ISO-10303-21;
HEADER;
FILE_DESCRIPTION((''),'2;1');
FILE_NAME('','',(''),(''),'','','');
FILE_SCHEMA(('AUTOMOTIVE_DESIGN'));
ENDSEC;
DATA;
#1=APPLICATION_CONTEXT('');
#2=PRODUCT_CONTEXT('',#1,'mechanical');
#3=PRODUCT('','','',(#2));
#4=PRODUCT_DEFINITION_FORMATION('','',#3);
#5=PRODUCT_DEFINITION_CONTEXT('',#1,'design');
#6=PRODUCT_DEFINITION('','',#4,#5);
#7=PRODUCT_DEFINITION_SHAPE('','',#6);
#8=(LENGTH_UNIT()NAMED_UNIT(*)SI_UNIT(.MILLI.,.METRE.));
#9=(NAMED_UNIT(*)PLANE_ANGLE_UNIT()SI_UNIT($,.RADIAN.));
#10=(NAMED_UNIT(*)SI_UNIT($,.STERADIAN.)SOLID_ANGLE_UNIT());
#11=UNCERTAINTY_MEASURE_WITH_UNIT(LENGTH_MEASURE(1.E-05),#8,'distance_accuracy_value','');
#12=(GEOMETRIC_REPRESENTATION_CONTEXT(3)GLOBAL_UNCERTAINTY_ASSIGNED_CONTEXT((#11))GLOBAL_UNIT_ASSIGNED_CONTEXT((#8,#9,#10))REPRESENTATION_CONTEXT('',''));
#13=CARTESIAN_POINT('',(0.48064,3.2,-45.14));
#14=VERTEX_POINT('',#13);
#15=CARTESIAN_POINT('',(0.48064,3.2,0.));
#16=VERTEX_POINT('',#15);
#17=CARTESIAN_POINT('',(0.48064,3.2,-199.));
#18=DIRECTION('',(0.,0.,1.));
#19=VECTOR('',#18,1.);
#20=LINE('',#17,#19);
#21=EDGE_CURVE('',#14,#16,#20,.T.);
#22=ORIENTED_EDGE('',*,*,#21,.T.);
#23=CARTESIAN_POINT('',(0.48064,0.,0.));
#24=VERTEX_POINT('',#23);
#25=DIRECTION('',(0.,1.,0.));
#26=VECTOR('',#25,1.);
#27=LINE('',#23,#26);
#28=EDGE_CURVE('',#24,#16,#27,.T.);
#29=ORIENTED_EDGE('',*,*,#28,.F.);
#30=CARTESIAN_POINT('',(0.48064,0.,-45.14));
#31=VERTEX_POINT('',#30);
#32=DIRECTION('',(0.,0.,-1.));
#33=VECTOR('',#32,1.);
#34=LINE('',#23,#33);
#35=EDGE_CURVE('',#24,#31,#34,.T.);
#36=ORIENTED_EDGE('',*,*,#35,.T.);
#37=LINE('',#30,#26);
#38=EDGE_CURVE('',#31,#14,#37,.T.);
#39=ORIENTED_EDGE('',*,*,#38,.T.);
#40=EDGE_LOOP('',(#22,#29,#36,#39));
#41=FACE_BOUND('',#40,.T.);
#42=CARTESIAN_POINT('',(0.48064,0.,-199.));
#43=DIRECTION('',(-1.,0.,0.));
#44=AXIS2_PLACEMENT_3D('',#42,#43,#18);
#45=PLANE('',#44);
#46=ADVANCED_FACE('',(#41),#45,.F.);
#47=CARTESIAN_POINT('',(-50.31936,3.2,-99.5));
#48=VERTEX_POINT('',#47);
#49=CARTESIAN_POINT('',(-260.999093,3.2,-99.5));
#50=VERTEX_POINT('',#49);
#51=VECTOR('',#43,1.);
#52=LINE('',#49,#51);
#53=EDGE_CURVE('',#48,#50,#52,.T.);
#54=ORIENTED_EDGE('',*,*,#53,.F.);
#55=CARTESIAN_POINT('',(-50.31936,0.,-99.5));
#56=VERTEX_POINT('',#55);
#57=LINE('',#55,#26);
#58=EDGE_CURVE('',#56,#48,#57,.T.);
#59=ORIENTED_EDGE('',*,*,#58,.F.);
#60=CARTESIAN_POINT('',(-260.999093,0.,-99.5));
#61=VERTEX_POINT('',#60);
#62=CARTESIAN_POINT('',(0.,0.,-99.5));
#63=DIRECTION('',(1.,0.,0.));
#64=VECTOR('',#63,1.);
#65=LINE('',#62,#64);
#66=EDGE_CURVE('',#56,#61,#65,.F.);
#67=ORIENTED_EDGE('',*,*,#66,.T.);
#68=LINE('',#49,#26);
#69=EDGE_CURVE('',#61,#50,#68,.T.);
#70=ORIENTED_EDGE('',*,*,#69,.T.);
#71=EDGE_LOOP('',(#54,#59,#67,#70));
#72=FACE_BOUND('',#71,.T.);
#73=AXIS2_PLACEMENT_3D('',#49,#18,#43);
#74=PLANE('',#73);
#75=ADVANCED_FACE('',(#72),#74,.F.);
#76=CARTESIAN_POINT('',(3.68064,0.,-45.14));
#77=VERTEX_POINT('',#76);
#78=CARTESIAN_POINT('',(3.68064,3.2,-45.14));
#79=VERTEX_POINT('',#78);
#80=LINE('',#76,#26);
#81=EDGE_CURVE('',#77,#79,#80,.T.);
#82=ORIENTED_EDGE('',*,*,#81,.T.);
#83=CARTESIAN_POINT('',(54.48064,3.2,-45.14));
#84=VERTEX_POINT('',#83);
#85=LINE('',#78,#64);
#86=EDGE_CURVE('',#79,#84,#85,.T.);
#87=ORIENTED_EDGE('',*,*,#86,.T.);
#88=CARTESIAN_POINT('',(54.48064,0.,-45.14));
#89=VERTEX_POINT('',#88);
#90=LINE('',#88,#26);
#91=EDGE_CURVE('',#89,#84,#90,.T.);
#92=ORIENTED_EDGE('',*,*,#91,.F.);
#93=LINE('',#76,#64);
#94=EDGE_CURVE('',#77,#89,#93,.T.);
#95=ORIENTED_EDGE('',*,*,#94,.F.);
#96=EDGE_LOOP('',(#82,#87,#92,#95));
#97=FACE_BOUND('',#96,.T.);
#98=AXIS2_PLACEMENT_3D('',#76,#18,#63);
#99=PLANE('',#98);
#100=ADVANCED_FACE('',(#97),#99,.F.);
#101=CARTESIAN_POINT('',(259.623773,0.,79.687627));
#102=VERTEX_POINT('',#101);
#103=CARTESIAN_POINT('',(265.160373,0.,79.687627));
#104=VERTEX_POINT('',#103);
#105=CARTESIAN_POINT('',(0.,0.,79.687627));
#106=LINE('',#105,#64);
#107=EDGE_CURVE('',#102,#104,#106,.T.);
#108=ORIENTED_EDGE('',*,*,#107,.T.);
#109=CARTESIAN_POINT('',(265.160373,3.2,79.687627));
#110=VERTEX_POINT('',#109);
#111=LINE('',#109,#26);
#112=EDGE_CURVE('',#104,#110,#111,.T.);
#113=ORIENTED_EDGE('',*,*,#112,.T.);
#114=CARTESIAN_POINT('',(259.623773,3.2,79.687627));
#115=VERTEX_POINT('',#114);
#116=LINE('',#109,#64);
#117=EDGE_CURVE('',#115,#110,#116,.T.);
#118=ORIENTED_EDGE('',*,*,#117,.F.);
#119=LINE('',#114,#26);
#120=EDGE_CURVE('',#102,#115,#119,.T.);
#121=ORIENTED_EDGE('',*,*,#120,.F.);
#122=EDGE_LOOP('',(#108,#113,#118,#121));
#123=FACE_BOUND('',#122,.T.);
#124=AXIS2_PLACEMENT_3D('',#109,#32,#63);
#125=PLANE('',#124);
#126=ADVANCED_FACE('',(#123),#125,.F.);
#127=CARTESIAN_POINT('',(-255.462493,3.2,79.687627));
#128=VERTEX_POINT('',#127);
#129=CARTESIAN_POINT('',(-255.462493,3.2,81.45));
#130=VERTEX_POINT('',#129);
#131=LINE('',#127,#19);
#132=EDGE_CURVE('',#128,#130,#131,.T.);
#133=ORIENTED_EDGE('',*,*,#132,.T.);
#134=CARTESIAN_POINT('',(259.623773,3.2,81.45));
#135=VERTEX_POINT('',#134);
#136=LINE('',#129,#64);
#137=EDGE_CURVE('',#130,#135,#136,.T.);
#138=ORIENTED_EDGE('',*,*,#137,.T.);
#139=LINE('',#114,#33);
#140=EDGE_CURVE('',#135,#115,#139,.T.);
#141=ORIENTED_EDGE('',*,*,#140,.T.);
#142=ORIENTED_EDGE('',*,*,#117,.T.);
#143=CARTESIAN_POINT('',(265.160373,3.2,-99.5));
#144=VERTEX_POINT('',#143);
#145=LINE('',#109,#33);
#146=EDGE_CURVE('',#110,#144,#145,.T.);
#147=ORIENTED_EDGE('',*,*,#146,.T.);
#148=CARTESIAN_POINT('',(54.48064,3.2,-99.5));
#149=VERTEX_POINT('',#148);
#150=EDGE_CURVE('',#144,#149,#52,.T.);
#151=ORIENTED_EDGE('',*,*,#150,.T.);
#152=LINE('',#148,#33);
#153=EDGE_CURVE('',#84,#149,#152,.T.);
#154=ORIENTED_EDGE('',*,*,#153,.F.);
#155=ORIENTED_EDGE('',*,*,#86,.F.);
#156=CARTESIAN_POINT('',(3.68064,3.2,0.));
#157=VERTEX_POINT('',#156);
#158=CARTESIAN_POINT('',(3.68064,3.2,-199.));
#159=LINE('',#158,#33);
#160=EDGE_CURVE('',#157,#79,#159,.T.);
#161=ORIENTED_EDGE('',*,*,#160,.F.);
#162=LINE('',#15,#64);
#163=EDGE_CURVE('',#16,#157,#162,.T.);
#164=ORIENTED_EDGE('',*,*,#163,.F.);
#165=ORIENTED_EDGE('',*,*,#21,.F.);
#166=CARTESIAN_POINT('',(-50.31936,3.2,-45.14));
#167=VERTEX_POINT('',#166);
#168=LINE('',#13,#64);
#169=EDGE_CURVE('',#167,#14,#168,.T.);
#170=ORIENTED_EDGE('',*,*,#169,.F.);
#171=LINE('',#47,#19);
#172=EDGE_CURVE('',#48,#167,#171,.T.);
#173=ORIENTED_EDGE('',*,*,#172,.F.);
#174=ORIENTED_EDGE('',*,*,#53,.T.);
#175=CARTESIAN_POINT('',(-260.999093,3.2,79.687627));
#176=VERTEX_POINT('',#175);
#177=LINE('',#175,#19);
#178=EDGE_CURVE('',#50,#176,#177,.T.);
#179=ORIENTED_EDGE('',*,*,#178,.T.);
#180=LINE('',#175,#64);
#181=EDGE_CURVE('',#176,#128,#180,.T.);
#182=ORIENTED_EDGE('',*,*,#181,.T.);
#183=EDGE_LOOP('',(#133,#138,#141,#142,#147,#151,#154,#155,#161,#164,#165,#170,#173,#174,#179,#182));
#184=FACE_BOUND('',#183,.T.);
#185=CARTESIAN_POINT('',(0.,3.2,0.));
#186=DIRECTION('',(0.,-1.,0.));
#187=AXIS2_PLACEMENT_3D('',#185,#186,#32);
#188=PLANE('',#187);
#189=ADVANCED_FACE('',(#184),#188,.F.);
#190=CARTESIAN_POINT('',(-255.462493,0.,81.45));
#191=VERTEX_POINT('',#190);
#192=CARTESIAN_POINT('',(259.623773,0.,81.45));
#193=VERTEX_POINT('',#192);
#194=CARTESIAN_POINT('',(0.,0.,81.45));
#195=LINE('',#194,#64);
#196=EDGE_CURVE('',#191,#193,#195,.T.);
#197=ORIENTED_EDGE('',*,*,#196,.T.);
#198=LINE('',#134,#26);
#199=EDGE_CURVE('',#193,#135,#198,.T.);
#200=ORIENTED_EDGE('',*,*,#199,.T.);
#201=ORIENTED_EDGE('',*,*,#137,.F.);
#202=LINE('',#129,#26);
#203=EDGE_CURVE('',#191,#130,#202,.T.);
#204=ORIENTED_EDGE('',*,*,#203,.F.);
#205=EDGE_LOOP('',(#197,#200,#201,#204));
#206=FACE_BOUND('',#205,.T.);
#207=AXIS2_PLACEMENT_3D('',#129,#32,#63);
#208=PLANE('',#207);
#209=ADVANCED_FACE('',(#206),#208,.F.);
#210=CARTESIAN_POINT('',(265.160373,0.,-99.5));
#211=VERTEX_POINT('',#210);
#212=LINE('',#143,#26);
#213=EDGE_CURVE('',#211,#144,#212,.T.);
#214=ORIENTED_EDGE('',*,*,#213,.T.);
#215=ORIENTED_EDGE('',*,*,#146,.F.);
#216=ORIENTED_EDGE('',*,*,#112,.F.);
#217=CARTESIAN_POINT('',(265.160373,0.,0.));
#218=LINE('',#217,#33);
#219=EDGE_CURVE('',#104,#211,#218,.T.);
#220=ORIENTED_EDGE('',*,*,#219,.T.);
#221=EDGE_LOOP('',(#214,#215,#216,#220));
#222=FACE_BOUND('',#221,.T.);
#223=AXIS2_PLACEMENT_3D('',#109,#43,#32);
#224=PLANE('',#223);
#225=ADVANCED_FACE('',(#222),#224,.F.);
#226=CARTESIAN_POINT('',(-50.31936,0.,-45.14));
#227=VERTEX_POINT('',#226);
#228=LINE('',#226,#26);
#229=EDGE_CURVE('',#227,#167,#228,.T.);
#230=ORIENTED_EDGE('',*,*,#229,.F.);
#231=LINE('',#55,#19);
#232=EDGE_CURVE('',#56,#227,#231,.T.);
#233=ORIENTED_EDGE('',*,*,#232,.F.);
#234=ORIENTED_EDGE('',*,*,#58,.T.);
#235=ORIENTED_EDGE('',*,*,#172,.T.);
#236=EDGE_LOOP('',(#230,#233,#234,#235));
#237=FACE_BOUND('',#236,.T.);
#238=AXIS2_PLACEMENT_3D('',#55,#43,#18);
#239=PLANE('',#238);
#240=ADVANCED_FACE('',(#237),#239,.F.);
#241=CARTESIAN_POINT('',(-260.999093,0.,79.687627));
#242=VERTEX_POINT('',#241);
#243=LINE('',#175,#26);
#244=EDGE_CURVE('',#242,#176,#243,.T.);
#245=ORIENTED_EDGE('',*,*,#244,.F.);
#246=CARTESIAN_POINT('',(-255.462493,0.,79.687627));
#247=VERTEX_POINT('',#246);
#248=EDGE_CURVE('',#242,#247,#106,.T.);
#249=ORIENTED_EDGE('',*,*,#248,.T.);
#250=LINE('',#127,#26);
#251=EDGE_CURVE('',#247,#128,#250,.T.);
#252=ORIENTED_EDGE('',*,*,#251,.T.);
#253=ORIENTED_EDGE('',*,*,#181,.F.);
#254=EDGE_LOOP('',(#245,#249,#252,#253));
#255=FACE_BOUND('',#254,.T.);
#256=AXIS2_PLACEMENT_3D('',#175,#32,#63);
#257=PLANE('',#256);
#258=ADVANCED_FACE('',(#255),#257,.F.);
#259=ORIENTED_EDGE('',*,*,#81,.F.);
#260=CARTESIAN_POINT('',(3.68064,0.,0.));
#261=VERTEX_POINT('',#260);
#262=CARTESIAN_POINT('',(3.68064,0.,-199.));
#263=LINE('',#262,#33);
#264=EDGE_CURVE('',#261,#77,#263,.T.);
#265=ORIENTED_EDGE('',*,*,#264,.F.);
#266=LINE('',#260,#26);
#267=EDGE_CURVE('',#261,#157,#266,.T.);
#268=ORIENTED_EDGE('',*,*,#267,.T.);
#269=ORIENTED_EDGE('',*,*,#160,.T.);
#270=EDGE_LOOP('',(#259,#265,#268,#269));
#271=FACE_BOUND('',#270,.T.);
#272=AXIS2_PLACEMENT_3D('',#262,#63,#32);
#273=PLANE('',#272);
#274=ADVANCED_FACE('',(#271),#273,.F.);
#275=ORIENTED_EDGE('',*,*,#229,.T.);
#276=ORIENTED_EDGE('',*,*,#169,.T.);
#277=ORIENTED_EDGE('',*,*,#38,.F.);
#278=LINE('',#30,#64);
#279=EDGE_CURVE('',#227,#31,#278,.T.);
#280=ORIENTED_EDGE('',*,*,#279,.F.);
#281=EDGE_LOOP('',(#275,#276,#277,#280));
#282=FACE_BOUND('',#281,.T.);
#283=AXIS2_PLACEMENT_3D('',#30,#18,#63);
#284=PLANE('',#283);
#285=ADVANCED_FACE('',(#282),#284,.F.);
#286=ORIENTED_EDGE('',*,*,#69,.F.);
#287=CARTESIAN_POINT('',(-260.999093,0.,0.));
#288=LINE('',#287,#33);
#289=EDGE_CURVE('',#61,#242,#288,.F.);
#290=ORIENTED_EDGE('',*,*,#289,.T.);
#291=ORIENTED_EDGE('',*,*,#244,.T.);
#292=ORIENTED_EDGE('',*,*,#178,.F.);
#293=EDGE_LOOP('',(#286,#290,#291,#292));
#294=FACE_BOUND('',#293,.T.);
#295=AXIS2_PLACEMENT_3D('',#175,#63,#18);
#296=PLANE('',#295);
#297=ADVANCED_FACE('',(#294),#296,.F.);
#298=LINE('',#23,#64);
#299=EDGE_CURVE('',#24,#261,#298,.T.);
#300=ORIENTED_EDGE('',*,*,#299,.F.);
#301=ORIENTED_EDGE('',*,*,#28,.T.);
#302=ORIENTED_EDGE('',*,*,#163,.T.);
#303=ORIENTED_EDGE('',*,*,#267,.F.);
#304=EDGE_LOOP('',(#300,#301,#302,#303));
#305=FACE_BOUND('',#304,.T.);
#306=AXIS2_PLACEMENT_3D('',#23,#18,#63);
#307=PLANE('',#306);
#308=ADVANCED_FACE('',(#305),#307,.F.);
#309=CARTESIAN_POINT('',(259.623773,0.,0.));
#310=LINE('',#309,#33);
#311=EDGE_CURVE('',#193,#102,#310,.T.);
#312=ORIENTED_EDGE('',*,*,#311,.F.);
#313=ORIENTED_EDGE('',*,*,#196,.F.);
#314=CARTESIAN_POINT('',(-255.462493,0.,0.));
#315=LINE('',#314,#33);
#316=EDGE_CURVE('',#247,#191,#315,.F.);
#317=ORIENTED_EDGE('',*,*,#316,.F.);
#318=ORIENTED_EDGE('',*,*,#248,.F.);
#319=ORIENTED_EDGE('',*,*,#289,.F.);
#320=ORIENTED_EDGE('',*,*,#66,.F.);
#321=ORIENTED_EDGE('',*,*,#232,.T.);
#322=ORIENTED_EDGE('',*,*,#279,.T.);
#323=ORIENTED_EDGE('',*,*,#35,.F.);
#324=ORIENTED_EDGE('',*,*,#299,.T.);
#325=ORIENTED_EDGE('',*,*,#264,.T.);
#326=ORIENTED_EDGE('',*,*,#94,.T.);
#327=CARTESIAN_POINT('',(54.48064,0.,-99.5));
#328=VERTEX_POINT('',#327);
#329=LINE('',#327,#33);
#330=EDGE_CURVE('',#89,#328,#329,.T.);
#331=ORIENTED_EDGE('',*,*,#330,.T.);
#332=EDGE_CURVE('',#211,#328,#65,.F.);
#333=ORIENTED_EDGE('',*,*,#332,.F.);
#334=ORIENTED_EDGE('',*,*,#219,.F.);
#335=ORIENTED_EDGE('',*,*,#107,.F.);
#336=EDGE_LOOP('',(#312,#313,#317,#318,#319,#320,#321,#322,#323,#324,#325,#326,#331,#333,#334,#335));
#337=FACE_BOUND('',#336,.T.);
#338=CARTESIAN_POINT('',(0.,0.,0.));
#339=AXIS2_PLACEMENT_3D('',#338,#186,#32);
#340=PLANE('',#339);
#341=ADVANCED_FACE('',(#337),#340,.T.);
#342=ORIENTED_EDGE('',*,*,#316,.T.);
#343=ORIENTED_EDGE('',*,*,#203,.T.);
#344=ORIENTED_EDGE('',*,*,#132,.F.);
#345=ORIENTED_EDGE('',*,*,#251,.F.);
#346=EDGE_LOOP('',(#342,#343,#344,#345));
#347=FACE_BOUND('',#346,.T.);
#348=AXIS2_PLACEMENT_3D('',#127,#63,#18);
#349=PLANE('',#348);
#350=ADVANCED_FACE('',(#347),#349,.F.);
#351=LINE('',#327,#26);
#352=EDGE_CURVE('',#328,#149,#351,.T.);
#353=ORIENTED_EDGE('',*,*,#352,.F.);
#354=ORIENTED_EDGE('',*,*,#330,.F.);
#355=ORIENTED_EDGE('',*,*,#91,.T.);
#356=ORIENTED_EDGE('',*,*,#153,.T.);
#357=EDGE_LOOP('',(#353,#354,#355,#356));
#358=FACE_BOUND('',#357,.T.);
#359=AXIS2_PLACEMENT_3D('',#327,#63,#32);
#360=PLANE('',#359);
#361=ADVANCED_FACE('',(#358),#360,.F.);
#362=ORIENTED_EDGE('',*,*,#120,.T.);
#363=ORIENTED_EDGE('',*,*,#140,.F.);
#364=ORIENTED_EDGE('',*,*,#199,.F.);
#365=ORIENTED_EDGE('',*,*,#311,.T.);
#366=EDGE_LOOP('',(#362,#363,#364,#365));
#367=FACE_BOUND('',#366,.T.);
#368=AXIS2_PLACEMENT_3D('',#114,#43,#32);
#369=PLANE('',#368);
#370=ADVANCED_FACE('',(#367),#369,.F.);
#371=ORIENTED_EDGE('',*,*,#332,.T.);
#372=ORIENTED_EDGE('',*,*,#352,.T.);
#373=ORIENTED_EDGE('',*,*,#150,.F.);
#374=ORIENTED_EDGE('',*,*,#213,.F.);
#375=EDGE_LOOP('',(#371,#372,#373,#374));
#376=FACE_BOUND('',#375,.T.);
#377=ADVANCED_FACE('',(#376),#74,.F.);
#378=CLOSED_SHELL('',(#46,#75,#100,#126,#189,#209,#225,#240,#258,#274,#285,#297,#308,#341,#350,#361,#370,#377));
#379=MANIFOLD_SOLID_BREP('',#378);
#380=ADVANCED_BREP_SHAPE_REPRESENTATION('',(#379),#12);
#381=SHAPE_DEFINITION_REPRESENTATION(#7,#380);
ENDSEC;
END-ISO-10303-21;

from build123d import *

# Parameters (mm, degrees)
BOSS_EXTRUDE1_DEPTH = 3.2
SKETCH11_W          = 3.2
SKETCH11_H          = 199.000000018
CUT_EXTRUDE1_DEPTH  = 284.232260808
SKETCH13_W          = 50.8
SKETCH13_H          = 54.36
CUT_EXTRUDE3_DEPTH  = 284.232260808


with BuildPart() as part:
    # Sketch1 → Boss-Extrude1 (new body)
    with BuildSketch(Plane(origin=(0, 0, 0), x_dir=(1, 0, 0), z_dir=(0, 1, 0))):
        Polygon((265.160373285, -79.687626629), (259.623773233, -79.687626629), (259.623773233, -81.450000041), (-255.462493265, -81.450000041), (-255.462493265, -79.687626629), (-260.999093317, -79.687626629), (-260.999093317, 99.500000009), (265.160373285, 99.500000009), align=None)
    extrude(amount=BOSS_EXTRUDE1_DEPTH)

    # Sketch11 → Cut-Extrude1 (cut, through all)
    with BuildSketch(Plane(origin=(0, 3.2, 0), x_dir=(1, 0, 0), z_dir=(0, 1, 0))):
        with Locations((2.080639984, 99.500000009)):
            Rectangle(SKETCH11_W, SKETCH11_H)
    extrude(amount=-CUT_EXTRUDE1_DEPTH, mode=Mode.SUBTRACT)

    # Sketch13 → Cut-Extrude3 (cut, through all)
    with BuildSketch(Plane(origin=(0, 3.2, 0), x_dir=(1, 0, 0), z_dir=(0, 1, 0))):
        with Locations((-24.919360016, 72.320000009)):
            Rectangle(SKETCH13_W, SKETCH13_H)
        with Locations((29.080639984, 72.320000009)):
            Rectangle(SKETCH13_W, SKETCH13_H)
    extrude(amount=-CUT_EXTRUDE3_DEPTH, mode=Mode.SUBTRACT)


solid = part.part
